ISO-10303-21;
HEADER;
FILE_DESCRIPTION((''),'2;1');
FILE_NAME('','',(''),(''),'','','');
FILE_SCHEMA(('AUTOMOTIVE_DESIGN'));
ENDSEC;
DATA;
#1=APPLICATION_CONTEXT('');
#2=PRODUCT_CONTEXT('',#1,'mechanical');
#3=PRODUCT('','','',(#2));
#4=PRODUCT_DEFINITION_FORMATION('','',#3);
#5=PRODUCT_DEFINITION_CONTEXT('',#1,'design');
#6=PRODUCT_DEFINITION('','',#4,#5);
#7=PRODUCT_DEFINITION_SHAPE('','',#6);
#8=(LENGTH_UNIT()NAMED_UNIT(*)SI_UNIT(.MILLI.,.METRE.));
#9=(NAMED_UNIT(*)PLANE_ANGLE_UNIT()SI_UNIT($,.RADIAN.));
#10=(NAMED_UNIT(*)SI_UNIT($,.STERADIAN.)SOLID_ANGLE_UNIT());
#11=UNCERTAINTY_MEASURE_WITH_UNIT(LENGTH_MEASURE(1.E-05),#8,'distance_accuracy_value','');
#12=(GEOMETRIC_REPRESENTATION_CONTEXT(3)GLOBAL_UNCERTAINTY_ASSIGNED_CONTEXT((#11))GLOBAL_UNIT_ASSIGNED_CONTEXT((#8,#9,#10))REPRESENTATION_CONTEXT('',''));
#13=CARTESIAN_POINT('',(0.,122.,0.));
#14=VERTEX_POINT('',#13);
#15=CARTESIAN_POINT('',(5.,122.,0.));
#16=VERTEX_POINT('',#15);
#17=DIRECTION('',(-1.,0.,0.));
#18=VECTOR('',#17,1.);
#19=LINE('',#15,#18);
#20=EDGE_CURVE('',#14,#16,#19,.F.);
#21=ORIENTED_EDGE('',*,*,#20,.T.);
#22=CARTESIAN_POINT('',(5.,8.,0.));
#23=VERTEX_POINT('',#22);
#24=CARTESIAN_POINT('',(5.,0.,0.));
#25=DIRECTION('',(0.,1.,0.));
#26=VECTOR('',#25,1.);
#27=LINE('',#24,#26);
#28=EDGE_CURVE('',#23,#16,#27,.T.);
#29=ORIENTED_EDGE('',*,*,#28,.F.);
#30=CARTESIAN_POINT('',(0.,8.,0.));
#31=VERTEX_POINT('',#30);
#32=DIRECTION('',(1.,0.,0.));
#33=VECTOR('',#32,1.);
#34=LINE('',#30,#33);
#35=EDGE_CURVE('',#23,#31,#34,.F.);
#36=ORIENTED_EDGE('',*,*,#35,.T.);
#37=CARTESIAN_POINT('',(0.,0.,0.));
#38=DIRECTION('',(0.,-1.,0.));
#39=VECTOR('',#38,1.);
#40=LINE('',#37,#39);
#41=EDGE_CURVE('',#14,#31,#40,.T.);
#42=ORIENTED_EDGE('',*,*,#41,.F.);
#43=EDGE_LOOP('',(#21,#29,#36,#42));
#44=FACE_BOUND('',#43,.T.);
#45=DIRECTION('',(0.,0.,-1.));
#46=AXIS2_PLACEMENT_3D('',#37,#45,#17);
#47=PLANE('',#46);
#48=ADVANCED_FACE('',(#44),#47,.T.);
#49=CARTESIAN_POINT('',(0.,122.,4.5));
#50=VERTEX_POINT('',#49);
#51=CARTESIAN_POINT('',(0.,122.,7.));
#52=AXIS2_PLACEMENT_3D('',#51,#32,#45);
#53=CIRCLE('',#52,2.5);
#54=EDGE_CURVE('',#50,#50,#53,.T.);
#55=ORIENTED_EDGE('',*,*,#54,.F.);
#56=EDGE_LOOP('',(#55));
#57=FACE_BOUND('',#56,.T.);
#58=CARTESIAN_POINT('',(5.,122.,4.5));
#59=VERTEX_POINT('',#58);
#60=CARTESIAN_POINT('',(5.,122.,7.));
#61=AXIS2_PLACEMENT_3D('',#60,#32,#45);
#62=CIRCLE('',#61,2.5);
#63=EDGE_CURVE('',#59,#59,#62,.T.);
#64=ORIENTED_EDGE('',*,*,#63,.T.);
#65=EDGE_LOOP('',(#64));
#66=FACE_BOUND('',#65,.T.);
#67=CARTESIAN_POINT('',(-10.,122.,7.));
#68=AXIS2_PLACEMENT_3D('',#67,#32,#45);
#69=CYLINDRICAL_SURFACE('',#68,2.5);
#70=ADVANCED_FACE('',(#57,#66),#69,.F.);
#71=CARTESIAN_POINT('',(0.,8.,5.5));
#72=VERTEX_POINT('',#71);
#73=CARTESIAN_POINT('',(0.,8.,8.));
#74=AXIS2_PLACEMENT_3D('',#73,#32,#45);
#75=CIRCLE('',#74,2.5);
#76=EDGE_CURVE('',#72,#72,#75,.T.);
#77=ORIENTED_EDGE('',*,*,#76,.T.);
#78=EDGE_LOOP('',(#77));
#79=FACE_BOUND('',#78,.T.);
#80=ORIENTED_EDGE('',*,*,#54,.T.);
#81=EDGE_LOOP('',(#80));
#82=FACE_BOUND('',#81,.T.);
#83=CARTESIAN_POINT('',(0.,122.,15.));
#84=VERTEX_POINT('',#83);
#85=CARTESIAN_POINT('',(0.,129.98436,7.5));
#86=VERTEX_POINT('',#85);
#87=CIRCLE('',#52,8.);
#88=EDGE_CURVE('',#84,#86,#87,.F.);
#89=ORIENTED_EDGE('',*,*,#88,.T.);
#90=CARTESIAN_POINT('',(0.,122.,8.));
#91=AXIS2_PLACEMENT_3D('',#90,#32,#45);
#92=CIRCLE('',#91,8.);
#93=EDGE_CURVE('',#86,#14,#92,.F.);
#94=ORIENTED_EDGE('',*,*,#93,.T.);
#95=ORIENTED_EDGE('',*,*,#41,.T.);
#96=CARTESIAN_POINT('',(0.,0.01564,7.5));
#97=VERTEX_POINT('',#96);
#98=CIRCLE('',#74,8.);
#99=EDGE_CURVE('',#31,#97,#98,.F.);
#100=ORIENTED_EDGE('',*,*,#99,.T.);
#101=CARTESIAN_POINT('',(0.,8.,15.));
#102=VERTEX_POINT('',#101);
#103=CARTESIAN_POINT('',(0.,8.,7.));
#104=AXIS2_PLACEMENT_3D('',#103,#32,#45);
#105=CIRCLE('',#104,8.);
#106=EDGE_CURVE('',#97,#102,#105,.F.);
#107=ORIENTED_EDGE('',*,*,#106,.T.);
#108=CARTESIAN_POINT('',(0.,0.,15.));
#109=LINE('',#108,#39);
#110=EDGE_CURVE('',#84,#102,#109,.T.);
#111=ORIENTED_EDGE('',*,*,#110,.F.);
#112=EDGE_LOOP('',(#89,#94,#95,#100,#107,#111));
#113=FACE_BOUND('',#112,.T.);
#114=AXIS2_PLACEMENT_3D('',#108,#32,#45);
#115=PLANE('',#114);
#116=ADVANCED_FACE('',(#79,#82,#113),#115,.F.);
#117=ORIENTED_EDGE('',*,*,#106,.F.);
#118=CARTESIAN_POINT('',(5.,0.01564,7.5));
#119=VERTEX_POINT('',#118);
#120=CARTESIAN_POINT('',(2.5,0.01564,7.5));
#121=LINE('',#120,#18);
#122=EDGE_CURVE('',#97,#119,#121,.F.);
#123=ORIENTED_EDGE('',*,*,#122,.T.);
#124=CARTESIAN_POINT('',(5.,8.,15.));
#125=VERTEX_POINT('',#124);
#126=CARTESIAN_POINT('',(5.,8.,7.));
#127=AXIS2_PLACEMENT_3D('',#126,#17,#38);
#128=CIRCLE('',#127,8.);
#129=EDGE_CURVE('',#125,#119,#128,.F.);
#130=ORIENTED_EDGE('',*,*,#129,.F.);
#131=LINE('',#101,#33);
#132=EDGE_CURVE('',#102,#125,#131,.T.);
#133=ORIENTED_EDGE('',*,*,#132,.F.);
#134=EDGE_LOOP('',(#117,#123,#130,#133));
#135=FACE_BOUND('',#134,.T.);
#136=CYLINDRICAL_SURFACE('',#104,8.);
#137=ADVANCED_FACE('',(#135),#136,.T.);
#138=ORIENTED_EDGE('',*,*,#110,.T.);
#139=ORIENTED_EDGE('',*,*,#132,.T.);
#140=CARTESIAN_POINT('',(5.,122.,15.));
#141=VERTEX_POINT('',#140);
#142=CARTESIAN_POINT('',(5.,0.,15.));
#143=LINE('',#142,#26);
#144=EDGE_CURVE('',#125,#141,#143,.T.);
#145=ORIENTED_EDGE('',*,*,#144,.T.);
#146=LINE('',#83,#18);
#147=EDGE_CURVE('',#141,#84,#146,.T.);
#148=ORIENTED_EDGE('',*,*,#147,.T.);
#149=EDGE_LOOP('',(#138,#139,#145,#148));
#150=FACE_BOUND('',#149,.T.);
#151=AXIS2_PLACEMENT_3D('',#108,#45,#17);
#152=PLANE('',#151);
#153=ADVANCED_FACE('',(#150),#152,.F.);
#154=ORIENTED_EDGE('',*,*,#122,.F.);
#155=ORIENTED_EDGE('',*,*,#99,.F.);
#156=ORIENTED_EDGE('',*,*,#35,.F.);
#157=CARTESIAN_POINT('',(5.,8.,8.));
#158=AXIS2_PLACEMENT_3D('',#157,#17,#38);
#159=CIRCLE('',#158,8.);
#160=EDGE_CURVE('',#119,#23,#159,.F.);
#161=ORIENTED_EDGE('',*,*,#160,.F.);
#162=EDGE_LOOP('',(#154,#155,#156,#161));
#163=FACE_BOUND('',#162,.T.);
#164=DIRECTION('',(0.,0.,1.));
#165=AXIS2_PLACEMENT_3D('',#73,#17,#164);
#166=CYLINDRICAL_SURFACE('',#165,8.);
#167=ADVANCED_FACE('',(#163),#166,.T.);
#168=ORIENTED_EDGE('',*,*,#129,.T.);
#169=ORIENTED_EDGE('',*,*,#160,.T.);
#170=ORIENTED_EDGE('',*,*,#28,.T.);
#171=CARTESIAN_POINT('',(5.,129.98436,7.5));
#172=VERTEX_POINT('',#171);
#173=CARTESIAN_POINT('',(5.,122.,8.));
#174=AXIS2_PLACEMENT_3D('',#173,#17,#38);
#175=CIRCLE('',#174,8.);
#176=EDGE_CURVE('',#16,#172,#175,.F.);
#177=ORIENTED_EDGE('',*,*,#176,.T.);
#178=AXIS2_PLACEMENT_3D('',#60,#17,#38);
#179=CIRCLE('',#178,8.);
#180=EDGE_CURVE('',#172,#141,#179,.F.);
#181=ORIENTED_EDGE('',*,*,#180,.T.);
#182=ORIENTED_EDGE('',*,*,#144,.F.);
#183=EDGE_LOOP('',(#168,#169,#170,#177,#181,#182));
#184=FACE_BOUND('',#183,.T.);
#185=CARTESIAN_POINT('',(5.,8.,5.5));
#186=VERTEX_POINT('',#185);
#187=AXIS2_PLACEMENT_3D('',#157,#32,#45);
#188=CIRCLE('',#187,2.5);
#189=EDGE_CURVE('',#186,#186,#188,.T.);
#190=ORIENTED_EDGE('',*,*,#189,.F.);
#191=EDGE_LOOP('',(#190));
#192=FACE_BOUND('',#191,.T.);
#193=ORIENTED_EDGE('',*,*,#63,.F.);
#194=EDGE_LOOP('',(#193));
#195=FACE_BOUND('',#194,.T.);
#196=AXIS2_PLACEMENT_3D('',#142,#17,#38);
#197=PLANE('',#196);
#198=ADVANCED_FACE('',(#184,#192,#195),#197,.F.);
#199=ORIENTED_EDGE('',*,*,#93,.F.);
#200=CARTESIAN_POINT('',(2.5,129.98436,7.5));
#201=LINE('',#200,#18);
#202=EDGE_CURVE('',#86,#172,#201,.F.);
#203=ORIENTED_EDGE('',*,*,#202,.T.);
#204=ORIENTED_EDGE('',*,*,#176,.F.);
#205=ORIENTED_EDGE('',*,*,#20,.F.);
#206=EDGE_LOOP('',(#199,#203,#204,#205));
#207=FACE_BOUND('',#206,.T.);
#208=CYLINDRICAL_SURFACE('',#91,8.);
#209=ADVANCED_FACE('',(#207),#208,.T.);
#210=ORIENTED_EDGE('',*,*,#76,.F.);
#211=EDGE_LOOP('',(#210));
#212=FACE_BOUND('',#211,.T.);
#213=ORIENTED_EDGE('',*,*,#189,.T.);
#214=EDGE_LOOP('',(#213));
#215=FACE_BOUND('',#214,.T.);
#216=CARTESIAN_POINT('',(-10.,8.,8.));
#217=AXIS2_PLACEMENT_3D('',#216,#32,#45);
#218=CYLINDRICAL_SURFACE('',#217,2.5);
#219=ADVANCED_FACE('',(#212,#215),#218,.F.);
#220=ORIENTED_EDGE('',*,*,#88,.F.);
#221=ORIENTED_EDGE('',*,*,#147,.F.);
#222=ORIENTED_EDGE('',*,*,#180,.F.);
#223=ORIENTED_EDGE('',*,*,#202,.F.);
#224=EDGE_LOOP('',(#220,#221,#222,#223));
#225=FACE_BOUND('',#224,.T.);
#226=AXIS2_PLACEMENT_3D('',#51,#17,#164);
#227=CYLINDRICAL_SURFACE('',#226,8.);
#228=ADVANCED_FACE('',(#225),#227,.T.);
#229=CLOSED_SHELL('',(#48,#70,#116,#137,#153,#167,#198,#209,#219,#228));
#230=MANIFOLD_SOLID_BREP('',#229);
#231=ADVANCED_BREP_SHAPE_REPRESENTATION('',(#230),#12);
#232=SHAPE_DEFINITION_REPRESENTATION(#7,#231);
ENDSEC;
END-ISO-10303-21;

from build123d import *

# Parameters (mm, degrees)
ESQUISSE1_W             = 5
ESQUISSE1_H             = 130
BOSS_EXTRU_1_DEPTH      = 15
CONG_1_R                = 8
ESQUISSE2_R             = 2.5
ENL_V_MAT_EXTRU_1_DEPTH = 15


with BuildPart() as part:
    # Esquisse1 → Boss.-Extru.1 (new body)
    with BuildSketch(Plane.XY):
        with Locations((2.5, 65)):
            Rectangle(ESQUISSE1_W, ESQUISSE1_H)
    extrude(amount=BOSS_EXTRU_1_DEPTH)

    # Congé1
    # the kernel refuses this fillet: 8 mm, written as the material it takes off along each edge
    with BuildSketch(Plane(origin=(-20, 0, 15), x_dir=(0, 0, -1), z_dir=(1, 0, 0)), Plane(origin=(25, 130, 15), x_dir=(0, 0, -1), z_dir=(-1, 0, 0))) as cong_1_piece_1:
        with BuildLine():
            CenterArc((CONG_1_R, CONG_1_R), CONG_1_R, 180, 90)
            Line((0, CONG_1_R), (0, 0))
            Line((0, 0), (CONG_1_R, 0))
        make_face()
    extrude(amount=45, mode=Mode.SUBTRACT)
    with BuildSketch(Plane(origin=(-20, 0, 0), x_dir=(0, 0, 1), z_dir=(1, 0, 0)), Plane(origin=(25, 130, 0), x_dir=(0, 0, 1), z_dir=(-1, 0, 0))) as cong_1_piece_2:
        with BuildLine():
            CenterArc((CONG_1_R, -CONG_1_R), CONG_1_R, 90, 90)
            Line((0, -CONG_1_R), (0, 0))
            Line((0, 0), (CONG_1_R, 0))
        make_face()
    extrude(amount=45, mode=Mode.SUBTRACT)

    # Esquisse2 → Enlèv. mat.-Extru.1 (cut)
    with BuildSketch(Plane(origin=(5, 0, 0), x_dir=(0, 0, -1), z_dir=(1, 0, 0))):
        with Locations((-7, 122)):
            Circle(ESQUISSE2_R)
        with Locations((-8, 8)):
            Circle(ESQUISSE2_R)
    extrude(amount=-ENL_V_MAT_EXTRU_1_DEPTH, mode=Mode.SUBTRACT)


solid = part.part
